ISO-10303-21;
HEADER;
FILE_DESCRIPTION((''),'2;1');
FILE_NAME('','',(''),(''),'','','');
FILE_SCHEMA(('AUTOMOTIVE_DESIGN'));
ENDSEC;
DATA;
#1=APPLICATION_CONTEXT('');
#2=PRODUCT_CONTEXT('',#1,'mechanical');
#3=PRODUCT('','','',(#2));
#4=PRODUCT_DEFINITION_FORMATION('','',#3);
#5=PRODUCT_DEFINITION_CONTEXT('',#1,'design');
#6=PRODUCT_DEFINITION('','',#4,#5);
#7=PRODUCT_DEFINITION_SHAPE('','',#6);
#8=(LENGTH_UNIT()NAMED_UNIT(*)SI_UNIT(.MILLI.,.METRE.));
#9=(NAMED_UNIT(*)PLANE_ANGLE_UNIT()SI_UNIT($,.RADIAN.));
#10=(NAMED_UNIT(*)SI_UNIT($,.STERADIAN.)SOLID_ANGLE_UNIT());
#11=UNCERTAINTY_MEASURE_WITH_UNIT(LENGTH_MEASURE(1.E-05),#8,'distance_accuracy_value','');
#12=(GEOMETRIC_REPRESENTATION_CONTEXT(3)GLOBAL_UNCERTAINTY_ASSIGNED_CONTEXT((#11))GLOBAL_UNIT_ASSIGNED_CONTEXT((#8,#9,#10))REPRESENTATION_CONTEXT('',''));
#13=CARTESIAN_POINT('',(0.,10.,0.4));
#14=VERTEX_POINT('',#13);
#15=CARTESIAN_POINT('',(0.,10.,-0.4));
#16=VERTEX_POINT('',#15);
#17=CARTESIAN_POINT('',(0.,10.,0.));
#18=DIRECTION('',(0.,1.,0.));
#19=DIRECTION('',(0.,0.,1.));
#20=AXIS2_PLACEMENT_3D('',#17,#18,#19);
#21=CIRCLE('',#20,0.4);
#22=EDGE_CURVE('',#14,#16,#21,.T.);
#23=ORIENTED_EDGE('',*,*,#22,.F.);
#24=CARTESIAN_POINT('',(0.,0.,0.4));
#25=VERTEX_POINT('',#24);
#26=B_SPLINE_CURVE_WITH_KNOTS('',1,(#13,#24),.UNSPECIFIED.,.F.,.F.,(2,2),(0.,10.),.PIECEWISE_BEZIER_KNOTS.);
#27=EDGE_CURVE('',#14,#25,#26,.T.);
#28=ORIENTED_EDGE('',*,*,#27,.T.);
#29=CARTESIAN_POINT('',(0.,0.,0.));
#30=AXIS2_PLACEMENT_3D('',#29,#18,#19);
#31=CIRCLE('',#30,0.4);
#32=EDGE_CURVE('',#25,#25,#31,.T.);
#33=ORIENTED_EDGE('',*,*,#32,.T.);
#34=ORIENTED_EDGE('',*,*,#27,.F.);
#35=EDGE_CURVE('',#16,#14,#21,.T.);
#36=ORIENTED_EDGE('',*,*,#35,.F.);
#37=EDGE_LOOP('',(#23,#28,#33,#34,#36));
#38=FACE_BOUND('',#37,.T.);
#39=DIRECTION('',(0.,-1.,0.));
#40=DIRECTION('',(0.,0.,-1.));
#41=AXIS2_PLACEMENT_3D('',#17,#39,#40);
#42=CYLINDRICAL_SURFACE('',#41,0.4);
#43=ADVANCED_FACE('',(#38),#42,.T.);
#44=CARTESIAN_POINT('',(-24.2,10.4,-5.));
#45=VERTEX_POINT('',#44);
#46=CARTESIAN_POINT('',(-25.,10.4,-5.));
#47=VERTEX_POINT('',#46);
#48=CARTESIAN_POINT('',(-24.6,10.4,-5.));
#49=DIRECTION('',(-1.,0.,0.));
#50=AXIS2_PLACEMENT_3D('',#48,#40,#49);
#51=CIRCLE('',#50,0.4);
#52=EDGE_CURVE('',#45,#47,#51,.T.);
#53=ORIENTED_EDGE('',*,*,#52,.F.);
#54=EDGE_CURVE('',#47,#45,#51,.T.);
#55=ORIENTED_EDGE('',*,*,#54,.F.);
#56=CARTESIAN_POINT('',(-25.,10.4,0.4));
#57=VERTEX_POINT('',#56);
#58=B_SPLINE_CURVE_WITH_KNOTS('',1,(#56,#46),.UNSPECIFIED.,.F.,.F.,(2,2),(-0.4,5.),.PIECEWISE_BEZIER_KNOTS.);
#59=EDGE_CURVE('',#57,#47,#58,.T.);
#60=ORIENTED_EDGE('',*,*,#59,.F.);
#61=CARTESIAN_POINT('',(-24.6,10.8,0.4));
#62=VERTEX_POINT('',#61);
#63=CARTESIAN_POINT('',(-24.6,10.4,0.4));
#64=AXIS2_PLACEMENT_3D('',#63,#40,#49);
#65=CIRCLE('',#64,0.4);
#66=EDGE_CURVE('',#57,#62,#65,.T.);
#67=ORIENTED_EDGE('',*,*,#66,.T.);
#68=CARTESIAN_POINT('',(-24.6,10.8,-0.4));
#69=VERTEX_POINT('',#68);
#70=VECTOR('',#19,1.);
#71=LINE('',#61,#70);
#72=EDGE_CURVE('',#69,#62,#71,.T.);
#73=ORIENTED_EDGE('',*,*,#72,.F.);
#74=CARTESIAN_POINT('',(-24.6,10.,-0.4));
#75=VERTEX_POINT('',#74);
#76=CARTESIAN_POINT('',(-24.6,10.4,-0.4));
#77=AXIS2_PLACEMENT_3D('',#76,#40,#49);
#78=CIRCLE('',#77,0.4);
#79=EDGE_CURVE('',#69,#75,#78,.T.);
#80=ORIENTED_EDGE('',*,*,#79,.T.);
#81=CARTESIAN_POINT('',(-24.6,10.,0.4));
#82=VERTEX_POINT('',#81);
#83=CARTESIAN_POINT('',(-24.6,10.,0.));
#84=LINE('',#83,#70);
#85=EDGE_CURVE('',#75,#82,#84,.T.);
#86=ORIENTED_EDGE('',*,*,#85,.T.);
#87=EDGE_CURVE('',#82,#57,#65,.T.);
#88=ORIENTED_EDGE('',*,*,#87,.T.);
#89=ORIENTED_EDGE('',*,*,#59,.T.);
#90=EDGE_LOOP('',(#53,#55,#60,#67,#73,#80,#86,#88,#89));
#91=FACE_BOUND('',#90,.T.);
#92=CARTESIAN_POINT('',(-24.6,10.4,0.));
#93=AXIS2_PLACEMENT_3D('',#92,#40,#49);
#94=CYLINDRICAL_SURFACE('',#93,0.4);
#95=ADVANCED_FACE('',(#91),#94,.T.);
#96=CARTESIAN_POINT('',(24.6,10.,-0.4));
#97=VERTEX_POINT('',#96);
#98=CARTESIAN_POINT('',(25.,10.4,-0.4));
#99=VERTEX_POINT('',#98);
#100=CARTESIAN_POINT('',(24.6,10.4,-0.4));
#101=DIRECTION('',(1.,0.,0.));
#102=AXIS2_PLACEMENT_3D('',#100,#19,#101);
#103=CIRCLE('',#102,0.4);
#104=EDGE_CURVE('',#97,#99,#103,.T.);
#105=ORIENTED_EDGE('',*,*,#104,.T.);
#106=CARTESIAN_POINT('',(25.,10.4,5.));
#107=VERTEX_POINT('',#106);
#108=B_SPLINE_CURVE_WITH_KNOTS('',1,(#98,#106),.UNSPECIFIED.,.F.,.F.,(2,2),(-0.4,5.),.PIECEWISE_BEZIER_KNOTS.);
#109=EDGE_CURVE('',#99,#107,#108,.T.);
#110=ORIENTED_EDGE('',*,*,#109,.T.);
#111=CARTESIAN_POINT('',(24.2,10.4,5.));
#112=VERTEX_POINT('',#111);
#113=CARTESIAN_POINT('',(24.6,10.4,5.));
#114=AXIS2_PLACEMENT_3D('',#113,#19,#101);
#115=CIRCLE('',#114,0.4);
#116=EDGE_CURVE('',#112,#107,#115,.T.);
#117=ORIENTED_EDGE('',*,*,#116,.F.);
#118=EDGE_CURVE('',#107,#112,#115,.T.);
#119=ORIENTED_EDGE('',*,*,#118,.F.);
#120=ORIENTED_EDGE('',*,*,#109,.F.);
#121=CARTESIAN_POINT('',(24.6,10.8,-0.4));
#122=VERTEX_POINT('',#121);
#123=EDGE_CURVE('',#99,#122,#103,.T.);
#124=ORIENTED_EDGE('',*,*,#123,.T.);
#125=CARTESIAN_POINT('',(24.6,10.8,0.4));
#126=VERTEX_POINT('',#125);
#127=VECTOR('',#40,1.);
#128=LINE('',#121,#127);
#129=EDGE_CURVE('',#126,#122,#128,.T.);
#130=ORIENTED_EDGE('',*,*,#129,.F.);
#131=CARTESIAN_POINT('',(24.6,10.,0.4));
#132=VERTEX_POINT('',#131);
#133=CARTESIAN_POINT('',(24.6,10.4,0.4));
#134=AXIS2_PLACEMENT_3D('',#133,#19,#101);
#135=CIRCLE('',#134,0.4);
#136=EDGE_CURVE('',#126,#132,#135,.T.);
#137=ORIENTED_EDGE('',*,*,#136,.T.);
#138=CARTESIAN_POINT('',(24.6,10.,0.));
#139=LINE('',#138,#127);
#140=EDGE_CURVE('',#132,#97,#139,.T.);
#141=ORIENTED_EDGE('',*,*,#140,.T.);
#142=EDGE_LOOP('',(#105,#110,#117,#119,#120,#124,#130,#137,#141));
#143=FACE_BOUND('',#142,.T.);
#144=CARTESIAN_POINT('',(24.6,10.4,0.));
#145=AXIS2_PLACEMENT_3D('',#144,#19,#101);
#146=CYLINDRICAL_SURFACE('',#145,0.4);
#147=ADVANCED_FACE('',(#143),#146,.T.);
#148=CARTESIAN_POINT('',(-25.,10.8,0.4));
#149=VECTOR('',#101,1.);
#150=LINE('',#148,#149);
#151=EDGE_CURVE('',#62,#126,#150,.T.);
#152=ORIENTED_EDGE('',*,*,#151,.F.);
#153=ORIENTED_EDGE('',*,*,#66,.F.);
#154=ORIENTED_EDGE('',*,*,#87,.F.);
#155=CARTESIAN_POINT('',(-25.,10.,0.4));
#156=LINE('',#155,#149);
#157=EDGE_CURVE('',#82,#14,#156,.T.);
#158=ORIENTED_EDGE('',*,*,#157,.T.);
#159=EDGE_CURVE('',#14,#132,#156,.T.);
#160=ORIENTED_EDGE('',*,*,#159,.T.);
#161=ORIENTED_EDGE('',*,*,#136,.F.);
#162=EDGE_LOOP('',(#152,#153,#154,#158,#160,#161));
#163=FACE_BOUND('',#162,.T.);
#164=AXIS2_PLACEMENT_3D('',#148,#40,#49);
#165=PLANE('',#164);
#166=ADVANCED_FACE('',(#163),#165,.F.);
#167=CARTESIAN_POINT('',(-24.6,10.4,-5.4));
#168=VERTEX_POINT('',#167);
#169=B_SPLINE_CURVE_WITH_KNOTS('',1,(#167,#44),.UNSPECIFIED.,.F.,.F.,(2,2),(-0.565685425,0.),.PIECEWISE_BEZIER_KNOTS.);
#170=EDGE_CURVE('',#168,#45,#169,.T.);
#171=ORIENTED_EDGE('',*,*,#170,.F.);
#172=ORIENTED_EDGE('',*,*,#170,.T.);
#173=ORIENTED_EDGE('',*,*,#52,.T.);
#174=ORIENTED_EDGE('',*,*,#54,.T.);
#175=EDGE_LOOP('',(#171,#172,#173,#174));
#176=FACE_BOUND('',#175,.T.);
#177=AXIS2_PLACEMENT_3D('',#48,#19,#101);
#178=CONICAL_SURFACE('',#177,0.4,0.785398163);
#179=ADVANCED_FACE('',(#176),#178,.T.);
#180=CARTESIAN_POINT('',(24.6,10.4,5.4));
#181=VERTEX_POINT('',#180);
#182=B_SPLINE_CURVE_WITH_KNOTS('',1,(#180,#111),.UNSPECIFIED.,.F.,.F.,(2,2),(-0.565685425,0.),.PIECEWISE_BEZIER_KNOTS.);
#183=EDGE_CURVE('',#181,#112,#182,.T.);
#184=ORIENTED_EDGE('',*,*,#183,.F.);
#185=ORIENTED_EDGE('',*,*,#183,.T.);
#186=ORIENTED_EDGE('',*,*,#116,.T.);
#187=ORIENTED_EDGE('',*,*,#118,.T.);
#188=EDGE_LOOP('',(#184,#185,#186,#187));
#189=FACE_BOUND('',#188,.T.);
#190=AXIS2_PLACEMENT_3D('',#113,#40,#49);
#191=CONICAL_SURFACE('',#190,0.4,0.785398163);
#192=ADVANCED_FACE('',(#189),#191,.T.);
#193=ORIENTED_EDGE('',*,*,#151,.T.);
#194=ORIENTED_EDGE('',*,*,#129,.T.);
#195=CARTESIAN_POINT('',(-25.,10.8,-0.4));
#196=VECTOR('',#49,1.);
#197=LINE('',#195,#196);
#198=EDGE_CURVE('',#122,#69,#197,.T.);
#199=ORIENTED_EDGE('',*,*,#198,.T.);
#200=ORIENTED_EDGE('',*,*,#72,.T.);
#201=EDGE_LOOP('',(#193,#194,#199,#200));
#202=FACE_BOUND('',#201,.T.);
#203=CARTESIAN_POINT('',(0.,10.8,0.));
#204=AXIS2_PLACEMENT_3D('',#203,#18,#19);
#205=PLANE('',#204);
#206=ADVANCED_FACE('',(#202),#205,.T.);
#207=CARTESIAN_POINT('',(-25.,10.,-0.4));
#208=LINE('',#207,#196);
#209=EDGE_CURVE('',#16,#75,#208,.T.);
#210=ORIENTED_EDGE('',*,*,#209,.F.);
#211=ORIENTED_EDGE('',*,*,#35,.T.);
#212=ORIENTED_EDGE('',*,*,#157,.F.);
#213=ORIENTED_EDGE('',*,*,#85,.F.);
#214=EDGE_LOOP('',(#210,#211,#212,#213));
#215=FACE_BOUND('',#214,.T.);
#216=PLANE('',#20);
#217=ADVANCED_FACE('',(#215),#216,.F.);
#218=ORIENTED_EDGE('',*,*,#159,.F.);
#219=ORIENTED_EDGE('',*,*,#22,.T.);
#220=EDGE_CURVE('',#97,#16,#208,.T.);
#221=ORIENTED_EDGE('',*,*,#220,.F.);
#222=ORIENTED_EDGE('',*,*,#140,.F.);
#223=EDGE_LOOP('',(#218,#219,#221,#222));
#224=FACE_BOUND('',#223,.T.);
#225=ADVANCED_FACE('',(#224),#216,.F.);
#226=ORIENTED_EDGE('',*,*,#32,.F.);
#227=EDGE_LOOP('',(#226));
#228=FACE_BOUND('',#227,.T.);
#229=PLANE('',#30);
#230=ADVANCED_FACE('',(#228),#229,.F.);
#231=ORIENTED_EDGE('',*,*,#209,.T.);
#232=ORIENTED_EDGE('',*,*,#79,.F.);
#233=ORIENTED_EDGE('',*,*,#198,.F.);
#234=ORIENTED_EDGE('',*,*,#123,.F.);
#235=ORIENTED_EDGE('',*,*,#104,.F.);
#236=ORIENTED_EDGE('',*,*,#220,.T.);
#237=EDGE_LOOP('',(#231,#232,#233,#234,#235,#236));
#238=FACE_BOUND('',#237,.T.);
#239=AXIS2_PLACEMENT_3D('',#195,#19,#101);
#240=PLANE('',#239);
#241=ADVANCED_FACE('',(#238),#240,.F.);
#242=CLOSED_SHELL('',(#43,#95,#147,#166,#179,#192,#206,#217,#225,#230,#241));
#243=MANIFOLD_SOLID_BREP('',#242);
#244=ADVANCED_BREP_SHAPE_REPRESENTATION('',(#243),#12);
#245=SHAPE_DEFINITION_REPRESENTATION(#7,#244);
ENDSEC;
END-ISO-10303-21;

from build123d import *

# Parameters (mm, degrees)
SKETCH_1_R      = 0.4
EXTRUDE_1_DEPTH = 10
SKETCH_2_W      = 50
SKETCH_2_H      = 0.8
EXTRUDE_2_DEPTH = 0.8
FILLET_1_R      = 0.4
SKETCH_3_R      = 0.4
EXTRUDE_3_DEPTH = 5
SKETCH_4_R      = 0.4
EXTRUDE_4_DEPTH = 5
CHAMFER_1_SIZE  = 0.4


with BuildPart() as part:
    # 草图1 → 凸台-拉伸1 (new body)
    with BuildSketch(Plane(origin=(0, 0, 0), x_dir=(1, 0, 0), z_dir=(0, 1, 0))):
        with Locations(Location((0, 0, 0), (0, 0, 270))):
            Circle(SKETCH_1_R)
    extrude(amount=EXTRUDE_1_DEPTH)

    # 草图2 → 凸台-拉伸2 (add)
    with BuildSketch(Plane(origin=(0, 10, 0), x_dir=(1, 0, 0), z_dir=(0, 1, 0))):
        Rectangle(SKETCH_2_W, SKETCH_2_H)
    extrude(amount=EXTRUDE_2_DEPTH)

    # 圆角1
    fillet_1_edges = [part.edges().sort_by_distance(p)[0] for p in [
        (25, 10, 0),
        (25, 10.8, 0),
        (-25, 10, 0),
        (-25, 10.8, 0),
    ]]
    fillet(fillet_1_edges, radius=FILLET_1_R - 0.0001)  # a hair under: the kernel refuses the full size

    # 草图3 → 凸台-拉伸3 (add)
    with BuildSketch(Plane.XY.offset(0.4)):
        with Locations((24.6, 10.4)):
            Circle(SKETCH_3_R)
    extrude(amount=EXTRUDE_3_DEPTH)

    # 草图4 → 凸台-拉伸4 (add)
    with BuildSketch(Plane(origin=(0, 0, -0.4), x_dir=(-1, 0, 0), z_dir=(0, 0, -1))):
        with Locations((24.6, 10.4)):
            Circle(SKETCH_4_R)
    extrude(amount=EXTRUDE_4_DEPTH)

    # 倒角1
    chamfer_1_edges = [part.edges().sort_by_distance(p)[0] for p in [
        (24.2, 10.4, 5.4),
        (-24.2, 10.4, -5.4),
    ]]
    chamfer(chamfer_1_edges, length=CHAMFER_1_SIZE)


solid = part.part
